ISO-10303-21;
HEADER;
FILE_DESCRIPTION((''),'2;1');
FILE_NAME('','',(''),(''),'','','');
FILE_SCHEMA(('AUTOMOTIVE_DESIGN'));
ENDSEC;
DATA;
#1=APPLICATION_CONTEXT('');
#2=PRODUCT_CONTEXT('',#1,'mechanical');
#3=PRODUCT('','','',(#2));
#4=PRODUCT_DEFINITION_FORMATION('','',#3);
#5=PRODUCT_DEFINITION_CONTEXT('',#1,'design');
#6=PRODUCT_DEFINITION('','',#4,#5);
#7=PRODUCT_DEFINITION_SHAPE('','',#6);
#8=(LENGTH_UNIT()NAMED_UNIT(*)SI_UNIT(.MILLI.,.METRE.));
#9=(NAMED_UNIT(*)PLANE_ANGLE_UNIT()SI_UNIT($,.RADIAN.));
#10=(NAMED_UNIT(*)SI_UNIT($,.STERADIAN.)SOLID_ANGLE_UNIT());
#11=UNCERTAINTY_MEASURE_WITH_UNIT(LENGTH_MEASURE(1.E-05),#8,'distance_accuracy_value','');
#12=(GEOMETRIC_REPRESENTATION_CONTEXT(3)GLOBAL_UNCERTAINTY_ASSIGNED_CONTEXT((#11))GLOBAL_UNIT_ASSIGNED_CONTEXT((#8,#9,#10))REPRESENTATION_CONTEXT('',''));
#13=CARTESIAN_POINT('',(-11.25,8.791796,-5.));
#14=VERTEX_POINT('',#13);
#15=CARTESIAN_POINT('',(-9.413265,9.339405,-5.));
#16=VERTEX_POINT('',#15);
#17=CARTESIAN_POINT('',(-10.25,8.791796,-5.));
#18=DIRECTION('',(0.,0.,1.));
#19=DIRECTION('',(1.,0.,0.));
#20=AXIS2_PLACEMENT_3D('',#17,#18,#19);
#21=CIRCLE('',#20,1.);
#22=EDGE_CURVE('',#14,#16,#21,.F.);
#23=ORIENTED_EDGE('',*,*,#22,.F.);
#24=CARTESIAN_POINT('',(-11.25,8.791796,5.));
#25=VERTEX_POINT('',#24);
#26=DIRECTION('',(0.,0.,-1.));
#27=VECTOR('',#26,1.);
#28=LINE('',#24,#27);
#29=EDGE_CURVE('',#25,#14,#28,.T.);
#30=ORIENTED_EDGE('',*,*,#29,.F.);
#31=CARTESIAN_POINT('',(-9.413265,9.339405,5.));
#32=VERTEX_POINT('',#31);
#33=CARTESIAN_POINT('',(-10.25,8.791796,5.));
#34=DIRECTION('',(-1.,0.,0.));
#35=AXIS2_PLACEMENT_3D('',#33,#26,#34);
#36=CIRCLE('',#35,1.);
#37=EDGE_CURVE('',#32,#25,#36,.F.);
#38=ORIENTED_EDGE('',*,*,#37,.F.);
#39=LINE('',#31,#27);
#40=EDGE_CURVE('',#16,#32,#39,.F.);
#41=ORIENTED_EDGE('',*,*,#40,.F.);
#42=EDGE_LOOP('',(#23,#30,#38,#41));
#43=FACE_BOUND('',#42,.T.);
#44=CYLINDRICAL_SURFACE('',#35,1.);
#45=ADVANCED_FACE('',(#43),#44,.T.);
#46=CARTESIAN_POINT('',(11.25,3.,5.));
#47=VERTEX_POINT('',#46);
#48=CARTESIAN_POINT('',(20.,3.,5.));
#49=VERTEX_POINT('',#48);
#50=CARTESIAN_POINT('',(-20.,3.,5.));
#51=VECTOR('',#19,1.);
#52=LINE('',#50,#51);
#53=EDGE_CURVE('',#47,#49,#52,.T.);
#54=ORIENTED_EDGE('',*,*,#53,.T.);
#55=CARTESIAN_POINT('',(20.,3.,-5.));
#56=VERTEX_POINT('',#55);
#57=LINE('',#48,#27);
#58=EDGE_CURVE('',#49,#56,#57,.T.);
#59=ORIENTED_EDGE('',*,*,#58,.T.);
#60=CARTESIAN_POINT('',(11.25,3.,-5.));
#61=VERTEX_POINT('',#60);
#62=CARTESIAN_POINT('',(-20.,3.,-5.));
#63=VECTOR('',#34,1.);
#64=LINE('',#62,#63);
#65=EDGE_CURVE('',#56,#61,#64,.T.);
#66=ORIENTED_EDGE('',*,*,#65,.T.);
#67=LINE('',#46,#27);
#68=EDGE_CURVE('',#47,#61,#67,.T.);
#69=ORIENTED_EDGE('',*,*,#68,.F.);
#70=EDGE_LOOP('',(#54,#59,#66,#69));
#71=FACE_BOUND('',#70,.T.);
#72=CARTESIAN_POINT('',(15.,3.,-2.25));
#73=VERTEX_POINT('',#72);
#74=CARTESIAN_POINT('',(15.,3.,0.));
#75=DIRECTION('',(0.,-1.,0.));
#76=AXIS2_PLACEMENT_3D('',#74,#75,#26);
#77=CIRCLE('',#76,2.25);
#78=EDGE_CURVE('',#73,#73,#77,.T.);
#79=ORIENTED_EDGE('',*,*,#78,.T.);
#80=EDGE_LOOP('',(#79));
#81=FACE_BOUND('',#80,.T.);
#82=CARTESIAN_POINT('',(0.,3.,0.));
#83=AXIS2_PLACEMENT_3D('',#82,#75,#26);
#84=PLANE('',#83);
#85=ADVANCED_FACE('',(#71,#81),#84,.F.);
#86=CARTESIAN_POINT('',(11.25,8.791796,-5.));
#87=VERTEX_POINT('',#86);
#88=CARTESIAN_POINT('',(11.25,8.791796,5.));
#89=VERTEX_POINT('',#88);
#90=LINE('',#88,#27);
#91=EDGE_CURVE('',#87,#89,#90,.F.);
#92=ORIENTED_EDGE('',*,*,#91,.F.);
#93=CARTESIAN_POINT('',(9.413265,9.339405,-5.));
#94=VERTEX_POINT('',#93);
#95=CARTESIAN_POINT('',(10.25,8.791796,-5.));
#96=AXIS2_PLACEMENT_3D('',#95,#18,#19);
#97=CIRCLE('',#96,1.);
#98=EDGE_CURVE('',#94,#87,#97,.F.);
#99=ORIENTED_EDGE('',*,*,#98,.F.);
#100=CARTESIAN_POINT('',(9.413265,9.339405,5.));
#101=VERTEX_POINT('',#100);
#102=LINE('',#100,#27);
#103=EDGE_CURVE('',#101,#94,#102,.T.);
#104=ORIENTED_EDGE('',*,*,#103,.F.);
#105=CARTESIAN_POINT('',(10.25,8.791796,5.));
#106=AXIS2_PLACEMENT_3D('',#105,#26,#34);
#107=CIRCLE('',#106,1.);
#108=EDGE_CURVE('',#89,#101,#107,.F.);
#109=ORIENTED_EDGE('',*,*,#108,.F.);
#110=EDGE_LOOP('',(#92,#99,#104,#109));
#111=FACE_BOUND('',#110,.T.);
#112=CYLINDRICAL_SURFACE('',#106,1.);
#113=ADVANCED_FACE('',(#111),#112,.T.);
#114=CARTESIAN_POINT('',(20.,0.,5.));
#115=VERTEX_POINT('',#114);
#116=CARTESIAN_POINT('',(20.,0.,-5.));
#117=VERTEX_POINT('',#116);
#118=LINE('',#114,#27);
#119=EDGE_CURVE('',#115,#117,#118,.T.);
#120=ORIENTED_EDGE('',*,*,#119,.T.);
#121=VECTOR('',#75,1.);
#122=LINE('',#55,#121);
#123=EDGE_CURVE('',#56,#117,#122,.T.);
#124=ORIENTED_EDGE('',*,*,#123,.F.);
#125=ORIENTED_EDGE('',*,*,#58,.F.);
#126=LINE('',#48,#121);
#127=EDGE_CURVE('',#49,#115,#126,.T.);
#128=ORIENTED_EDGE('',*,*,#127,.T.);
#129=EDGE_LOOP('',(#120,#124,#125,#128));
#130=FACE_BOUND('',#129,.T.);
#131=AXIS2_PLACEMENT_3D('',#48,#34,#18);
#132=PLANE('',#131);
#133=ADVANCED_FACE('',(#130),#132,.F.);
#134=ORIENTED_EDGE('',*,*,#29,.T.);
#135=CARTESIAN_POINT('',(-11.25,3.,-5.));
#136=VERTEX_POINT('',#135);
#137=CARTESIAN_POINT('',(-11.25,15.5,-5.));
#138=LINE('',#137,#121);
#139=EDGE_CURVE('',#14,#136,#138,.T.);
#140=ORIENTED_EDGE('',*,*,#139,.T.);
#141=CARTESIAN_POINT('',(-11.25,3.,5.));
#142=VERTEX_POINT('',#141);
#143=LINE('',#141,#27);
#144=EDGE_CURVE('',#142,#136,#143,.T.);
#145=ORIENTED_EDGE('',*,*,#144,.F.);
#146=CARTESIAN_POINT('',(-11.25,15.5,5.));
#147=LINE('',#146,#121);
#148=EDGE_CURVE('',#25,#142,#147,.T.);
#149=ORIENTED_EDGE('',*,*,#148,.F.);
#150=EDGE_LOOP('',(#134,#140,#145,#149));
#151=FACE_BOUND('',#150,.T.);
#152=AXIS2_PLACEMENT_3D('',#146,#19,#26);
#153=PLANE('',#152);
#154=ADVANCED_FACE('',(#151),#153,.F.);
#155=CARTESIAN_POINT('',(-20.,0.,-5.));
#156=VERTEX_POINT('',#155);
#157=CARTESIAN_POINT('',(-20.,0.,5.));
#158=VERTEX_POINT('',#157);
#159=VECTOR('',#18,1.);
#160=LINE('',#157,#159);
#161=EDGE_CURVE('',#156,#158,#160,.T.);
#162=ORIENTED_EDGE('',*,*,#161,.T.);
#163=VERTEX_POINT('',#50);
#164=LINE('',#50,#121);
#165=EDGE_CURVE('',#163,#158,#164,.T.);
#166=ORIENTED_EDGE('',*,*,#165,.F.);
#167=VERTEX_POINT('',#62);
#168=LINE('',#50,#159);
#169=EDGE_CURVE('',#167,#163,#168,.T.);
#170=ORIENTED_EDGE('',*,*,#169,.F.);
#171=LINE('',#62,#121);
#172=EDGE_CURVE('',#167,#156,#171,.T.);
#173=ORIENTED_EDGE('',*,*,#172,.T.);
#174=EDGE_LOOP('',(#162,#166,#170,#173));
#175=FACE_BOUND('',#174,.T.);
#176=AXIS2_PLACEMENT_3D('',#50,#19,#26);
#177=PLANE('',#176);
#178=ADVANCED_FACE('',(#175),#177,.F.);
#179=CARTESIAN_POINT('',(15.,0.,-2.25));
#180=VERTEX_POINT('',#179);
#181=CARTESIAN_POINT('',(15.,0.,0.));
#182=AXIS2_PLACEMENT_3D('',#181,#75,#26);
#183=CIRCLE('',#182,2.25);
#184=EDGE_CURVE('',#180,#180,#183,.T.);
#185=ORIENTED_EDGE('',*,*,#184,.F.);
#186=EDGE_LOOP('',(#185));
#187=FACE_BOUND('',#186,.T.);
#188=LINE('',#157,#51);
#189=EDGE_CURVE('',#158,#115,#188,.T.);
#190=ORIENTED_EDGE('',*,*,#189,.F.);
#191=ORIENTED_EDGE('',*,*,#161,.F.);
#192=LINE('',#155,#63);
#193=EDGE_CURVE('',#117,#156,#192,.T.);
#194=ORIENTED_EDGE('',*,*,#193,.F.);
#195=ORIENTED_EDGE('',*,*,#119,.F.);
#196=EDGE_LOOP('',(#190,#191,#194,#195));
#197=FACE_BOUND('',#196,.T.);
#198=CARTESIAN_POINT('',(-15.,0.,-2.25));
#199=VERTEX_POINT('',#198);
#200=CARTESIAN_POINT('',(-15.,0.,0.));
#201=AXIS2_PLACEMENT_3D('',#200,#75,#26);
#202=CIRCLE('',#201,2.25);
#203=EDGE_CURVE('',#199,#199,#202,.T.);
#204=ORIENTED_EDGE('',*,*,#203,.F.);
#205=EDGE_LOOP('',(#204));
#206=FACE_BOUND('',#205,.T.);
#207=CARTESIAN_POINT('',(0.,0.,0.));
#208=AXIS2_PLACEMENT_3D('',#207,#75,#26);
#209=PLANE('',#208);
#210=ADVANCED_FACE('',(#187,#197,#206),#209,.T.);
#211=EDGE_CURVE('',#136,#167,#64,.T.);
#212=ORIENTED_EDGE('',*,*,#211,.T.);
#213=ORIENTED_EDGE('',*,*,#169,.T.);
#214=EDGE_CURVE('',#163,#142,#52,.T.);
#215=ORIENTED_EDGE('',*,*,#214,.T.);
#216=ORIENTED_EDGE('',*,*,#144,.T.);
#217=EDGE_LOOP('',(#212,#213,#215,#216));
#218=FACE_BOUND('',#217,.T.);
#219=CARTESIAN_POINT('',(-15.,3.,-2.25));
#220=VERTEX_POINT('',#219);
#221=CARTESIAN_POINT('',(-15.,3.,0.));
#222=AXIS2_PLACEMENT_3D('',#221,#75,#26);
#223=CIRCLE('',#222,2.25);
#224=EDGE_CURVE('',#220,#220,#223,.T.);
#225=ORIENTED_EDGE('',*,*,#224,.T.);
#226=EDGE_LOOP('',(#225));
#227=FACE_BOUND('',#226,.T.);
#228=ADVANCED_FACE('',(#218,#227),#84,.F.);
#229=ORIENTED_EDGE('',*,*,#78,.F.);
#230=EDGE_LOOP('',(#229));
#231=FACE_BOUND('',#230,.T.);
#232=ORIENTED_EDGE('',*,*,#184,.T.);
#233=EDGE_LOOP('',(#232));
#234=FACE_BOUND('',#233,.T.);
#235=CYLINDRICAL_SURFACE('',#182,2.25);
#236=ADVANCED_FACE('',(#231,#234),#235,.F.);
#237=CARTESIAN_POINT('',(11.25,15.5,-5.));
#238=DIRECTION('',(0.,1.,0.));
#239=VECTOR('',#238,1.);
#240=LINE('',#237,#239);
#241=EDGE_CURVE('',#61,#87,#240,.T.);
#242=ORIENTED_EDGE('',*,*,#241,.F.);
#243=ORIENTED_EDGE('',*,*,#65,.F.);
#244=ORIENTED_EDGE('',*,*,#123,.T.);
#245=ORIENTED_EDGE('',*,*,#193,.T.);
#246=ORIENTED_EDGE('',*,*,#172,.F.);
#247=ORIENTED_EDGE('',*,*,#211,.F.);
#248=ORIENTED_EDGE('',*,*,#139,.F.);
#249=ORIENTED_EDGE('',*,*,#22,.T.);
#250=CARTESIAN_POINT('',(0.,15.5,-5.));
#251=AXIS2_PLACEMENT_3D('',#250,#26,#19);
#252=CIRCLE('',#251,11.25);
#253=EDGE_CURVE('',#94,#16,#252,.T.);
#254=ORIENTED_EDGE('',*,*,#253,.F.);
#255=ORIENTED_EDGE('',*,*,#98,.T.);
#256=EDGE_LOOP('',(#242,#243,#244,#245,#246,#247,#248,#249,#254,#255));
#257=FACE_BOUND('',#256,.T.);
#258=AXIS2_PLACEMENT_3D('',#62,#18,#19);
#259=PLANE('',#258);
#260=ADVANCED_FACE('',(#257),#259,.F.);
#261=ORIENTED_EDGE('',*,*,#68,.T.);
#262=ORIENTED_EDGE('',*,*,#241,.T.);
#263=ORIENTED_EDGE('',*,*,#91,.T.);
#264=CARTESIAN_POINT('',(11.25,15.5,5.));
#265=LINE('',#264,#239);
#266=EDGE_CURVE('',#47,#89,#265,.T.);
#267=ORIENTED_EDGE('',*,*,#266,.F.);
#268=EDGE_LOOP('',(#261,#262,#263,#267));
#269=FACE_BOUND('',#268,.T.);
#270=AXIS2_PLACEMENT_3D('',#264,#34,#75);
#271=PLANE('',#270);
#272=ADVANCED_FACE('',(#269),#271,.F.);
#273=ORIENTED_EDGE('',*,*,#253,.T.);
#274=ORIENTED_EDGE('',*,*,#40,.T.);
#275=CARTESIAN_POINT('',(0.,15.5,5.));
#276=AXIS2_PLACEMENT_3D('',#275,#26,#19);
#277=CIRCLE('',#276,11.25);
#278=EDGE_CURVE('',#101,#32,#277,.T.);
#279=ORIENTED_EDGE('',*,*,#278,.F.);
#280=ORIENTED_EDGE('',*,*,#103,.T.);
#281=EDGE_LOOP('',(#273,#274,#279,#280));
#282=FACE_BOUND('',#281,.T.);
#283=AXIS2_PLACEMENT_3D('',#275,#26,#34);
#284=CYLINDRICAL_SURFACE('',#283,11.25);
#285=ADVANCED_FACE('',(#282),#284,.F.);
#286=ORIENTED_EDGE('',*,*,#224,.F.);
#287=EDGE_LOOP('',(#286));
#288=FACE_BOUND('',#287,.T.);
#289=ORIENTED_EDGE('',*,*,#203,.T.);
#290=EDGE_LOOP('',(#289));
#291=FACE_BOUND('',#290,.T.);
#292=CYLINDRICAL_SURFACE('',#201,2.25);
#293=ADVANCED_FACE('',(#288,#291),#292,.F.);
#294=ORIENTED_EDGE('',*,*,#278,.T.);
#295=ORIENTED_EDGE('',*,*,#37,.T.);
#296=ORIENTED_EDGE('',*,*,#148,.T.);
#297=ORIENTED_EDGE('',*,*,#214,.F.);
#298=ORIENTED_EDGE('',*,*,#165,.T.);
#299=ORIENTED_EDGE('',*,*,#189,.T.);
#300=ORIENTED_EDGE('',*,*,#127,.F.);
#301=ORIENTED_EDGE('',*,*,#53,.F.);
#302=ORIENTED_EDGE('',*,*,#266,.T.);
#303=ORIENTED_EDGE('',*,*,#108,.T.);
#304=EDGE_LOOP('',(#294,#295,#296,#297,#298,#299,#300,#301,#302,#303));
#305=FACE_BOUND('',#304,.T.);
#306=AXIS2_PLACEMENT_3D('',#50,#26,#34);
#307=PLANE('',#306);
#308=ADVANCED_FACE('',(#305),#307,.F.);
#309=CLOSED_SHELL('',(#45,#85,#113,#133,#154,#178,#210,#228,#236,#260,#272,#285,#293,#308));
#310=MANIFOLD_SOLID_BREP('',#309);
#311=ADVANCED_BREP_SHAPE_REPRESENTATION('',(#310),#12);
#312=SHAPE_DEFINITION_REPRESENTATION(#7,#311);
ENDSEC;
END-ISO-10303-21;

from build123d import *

# Parameters (mm, degrees)
SKETCH1_W                = 40
SKETCH1_H                = 10
BOSS_EXTRUDE1_DEPTH      = 3
BOSS_EXTRUDE2_DEPTH      = 5
BOSS_EXTRUDE2_DEPTH_BACK = 5
FILLET1_START            = -6
FILLET1_DEPTH            = 12
M4_CLEARANCE_HOLE1_D     = 4.5


with BuildPart() as part:
    # Sketch1 → Boss-Extrude1 (new body)
    with BuildSketch(Plane(origin=(0, 0, 0), x_dir=(1, 0, 0), z_dir=(0, 1, 0))):
        Rectangle(SKETCH1_W, SKETCH1_H)
    extrude(amount=BOSS_EXTRUDE1_DEPTH)

    # Sketch2 → Boss-Extrude2 (add, two sides: drawn at the far end of the back side and taken through both)
    with BuildSketch(Plane.XY.offset(-BOSS_EXTRUDE2_DEPTH_BACK)):
        with BuildLine():
            Line((11.25, 15.5), (11.25, 3))
            Line((11.25, 3), (-11.25, 3))
            Line((-11.25, 3), (-11.25, 15.5))
            ThreePointArc((-11.25, 15.5), (0, 4.25), (11.25, 15.5))
        make_face()
    extrude(amount=BOSS_EXTRUDE2_DEPTH + BOSS_EXTRUDE2_DEPTH_BACK)

    # Fillet1: read off the stored shape, not the designer's step
    # Fillet1 outline → Fillet1 (cut)
    with BuildSketch(Plane.XY.offset(FILLET1_START)):
        with BuildLine():
            ThreePointArc((11.25, 15.5), (10.781042034, 12.285714286), (9.413265306, 9.339404552))
            ThreePointArc((9.413265306, 9.339404552), (10.535714285, 9.750110915), (11.25, 8.791796068))
            Line((11.25, 8.791796068), (11.25, 15.5))
        make_face()
        with BuildLine():
            ThreePointArc((-11.25, 8.791796068), (-10.535714285, 9.750110915), (-9.413265306, 9.339404552))
            ThreePointArc((-9.413265306, 9.339404552), (-10.781042034, 12.285714286), (-11.25, 15.5))
            Line((-11.25, 15.5), (-11.25, 8.791796068))
        make_face()
    extrude(amount=FILLET1_DEPTH, mode=Mode.SUBTRACT)

    # M4 Clearance Hole1 (through all)
    with Locations(Plane(origin=(0, 0, 0), x_dir=(-1, 0, 0), z_dir=(0, -1, 0))):
        with Locations((15, 0), (-15, 0)):
            Hole(M4_CLEARANCE_HOLE1_D / 2)


solid = part.part
